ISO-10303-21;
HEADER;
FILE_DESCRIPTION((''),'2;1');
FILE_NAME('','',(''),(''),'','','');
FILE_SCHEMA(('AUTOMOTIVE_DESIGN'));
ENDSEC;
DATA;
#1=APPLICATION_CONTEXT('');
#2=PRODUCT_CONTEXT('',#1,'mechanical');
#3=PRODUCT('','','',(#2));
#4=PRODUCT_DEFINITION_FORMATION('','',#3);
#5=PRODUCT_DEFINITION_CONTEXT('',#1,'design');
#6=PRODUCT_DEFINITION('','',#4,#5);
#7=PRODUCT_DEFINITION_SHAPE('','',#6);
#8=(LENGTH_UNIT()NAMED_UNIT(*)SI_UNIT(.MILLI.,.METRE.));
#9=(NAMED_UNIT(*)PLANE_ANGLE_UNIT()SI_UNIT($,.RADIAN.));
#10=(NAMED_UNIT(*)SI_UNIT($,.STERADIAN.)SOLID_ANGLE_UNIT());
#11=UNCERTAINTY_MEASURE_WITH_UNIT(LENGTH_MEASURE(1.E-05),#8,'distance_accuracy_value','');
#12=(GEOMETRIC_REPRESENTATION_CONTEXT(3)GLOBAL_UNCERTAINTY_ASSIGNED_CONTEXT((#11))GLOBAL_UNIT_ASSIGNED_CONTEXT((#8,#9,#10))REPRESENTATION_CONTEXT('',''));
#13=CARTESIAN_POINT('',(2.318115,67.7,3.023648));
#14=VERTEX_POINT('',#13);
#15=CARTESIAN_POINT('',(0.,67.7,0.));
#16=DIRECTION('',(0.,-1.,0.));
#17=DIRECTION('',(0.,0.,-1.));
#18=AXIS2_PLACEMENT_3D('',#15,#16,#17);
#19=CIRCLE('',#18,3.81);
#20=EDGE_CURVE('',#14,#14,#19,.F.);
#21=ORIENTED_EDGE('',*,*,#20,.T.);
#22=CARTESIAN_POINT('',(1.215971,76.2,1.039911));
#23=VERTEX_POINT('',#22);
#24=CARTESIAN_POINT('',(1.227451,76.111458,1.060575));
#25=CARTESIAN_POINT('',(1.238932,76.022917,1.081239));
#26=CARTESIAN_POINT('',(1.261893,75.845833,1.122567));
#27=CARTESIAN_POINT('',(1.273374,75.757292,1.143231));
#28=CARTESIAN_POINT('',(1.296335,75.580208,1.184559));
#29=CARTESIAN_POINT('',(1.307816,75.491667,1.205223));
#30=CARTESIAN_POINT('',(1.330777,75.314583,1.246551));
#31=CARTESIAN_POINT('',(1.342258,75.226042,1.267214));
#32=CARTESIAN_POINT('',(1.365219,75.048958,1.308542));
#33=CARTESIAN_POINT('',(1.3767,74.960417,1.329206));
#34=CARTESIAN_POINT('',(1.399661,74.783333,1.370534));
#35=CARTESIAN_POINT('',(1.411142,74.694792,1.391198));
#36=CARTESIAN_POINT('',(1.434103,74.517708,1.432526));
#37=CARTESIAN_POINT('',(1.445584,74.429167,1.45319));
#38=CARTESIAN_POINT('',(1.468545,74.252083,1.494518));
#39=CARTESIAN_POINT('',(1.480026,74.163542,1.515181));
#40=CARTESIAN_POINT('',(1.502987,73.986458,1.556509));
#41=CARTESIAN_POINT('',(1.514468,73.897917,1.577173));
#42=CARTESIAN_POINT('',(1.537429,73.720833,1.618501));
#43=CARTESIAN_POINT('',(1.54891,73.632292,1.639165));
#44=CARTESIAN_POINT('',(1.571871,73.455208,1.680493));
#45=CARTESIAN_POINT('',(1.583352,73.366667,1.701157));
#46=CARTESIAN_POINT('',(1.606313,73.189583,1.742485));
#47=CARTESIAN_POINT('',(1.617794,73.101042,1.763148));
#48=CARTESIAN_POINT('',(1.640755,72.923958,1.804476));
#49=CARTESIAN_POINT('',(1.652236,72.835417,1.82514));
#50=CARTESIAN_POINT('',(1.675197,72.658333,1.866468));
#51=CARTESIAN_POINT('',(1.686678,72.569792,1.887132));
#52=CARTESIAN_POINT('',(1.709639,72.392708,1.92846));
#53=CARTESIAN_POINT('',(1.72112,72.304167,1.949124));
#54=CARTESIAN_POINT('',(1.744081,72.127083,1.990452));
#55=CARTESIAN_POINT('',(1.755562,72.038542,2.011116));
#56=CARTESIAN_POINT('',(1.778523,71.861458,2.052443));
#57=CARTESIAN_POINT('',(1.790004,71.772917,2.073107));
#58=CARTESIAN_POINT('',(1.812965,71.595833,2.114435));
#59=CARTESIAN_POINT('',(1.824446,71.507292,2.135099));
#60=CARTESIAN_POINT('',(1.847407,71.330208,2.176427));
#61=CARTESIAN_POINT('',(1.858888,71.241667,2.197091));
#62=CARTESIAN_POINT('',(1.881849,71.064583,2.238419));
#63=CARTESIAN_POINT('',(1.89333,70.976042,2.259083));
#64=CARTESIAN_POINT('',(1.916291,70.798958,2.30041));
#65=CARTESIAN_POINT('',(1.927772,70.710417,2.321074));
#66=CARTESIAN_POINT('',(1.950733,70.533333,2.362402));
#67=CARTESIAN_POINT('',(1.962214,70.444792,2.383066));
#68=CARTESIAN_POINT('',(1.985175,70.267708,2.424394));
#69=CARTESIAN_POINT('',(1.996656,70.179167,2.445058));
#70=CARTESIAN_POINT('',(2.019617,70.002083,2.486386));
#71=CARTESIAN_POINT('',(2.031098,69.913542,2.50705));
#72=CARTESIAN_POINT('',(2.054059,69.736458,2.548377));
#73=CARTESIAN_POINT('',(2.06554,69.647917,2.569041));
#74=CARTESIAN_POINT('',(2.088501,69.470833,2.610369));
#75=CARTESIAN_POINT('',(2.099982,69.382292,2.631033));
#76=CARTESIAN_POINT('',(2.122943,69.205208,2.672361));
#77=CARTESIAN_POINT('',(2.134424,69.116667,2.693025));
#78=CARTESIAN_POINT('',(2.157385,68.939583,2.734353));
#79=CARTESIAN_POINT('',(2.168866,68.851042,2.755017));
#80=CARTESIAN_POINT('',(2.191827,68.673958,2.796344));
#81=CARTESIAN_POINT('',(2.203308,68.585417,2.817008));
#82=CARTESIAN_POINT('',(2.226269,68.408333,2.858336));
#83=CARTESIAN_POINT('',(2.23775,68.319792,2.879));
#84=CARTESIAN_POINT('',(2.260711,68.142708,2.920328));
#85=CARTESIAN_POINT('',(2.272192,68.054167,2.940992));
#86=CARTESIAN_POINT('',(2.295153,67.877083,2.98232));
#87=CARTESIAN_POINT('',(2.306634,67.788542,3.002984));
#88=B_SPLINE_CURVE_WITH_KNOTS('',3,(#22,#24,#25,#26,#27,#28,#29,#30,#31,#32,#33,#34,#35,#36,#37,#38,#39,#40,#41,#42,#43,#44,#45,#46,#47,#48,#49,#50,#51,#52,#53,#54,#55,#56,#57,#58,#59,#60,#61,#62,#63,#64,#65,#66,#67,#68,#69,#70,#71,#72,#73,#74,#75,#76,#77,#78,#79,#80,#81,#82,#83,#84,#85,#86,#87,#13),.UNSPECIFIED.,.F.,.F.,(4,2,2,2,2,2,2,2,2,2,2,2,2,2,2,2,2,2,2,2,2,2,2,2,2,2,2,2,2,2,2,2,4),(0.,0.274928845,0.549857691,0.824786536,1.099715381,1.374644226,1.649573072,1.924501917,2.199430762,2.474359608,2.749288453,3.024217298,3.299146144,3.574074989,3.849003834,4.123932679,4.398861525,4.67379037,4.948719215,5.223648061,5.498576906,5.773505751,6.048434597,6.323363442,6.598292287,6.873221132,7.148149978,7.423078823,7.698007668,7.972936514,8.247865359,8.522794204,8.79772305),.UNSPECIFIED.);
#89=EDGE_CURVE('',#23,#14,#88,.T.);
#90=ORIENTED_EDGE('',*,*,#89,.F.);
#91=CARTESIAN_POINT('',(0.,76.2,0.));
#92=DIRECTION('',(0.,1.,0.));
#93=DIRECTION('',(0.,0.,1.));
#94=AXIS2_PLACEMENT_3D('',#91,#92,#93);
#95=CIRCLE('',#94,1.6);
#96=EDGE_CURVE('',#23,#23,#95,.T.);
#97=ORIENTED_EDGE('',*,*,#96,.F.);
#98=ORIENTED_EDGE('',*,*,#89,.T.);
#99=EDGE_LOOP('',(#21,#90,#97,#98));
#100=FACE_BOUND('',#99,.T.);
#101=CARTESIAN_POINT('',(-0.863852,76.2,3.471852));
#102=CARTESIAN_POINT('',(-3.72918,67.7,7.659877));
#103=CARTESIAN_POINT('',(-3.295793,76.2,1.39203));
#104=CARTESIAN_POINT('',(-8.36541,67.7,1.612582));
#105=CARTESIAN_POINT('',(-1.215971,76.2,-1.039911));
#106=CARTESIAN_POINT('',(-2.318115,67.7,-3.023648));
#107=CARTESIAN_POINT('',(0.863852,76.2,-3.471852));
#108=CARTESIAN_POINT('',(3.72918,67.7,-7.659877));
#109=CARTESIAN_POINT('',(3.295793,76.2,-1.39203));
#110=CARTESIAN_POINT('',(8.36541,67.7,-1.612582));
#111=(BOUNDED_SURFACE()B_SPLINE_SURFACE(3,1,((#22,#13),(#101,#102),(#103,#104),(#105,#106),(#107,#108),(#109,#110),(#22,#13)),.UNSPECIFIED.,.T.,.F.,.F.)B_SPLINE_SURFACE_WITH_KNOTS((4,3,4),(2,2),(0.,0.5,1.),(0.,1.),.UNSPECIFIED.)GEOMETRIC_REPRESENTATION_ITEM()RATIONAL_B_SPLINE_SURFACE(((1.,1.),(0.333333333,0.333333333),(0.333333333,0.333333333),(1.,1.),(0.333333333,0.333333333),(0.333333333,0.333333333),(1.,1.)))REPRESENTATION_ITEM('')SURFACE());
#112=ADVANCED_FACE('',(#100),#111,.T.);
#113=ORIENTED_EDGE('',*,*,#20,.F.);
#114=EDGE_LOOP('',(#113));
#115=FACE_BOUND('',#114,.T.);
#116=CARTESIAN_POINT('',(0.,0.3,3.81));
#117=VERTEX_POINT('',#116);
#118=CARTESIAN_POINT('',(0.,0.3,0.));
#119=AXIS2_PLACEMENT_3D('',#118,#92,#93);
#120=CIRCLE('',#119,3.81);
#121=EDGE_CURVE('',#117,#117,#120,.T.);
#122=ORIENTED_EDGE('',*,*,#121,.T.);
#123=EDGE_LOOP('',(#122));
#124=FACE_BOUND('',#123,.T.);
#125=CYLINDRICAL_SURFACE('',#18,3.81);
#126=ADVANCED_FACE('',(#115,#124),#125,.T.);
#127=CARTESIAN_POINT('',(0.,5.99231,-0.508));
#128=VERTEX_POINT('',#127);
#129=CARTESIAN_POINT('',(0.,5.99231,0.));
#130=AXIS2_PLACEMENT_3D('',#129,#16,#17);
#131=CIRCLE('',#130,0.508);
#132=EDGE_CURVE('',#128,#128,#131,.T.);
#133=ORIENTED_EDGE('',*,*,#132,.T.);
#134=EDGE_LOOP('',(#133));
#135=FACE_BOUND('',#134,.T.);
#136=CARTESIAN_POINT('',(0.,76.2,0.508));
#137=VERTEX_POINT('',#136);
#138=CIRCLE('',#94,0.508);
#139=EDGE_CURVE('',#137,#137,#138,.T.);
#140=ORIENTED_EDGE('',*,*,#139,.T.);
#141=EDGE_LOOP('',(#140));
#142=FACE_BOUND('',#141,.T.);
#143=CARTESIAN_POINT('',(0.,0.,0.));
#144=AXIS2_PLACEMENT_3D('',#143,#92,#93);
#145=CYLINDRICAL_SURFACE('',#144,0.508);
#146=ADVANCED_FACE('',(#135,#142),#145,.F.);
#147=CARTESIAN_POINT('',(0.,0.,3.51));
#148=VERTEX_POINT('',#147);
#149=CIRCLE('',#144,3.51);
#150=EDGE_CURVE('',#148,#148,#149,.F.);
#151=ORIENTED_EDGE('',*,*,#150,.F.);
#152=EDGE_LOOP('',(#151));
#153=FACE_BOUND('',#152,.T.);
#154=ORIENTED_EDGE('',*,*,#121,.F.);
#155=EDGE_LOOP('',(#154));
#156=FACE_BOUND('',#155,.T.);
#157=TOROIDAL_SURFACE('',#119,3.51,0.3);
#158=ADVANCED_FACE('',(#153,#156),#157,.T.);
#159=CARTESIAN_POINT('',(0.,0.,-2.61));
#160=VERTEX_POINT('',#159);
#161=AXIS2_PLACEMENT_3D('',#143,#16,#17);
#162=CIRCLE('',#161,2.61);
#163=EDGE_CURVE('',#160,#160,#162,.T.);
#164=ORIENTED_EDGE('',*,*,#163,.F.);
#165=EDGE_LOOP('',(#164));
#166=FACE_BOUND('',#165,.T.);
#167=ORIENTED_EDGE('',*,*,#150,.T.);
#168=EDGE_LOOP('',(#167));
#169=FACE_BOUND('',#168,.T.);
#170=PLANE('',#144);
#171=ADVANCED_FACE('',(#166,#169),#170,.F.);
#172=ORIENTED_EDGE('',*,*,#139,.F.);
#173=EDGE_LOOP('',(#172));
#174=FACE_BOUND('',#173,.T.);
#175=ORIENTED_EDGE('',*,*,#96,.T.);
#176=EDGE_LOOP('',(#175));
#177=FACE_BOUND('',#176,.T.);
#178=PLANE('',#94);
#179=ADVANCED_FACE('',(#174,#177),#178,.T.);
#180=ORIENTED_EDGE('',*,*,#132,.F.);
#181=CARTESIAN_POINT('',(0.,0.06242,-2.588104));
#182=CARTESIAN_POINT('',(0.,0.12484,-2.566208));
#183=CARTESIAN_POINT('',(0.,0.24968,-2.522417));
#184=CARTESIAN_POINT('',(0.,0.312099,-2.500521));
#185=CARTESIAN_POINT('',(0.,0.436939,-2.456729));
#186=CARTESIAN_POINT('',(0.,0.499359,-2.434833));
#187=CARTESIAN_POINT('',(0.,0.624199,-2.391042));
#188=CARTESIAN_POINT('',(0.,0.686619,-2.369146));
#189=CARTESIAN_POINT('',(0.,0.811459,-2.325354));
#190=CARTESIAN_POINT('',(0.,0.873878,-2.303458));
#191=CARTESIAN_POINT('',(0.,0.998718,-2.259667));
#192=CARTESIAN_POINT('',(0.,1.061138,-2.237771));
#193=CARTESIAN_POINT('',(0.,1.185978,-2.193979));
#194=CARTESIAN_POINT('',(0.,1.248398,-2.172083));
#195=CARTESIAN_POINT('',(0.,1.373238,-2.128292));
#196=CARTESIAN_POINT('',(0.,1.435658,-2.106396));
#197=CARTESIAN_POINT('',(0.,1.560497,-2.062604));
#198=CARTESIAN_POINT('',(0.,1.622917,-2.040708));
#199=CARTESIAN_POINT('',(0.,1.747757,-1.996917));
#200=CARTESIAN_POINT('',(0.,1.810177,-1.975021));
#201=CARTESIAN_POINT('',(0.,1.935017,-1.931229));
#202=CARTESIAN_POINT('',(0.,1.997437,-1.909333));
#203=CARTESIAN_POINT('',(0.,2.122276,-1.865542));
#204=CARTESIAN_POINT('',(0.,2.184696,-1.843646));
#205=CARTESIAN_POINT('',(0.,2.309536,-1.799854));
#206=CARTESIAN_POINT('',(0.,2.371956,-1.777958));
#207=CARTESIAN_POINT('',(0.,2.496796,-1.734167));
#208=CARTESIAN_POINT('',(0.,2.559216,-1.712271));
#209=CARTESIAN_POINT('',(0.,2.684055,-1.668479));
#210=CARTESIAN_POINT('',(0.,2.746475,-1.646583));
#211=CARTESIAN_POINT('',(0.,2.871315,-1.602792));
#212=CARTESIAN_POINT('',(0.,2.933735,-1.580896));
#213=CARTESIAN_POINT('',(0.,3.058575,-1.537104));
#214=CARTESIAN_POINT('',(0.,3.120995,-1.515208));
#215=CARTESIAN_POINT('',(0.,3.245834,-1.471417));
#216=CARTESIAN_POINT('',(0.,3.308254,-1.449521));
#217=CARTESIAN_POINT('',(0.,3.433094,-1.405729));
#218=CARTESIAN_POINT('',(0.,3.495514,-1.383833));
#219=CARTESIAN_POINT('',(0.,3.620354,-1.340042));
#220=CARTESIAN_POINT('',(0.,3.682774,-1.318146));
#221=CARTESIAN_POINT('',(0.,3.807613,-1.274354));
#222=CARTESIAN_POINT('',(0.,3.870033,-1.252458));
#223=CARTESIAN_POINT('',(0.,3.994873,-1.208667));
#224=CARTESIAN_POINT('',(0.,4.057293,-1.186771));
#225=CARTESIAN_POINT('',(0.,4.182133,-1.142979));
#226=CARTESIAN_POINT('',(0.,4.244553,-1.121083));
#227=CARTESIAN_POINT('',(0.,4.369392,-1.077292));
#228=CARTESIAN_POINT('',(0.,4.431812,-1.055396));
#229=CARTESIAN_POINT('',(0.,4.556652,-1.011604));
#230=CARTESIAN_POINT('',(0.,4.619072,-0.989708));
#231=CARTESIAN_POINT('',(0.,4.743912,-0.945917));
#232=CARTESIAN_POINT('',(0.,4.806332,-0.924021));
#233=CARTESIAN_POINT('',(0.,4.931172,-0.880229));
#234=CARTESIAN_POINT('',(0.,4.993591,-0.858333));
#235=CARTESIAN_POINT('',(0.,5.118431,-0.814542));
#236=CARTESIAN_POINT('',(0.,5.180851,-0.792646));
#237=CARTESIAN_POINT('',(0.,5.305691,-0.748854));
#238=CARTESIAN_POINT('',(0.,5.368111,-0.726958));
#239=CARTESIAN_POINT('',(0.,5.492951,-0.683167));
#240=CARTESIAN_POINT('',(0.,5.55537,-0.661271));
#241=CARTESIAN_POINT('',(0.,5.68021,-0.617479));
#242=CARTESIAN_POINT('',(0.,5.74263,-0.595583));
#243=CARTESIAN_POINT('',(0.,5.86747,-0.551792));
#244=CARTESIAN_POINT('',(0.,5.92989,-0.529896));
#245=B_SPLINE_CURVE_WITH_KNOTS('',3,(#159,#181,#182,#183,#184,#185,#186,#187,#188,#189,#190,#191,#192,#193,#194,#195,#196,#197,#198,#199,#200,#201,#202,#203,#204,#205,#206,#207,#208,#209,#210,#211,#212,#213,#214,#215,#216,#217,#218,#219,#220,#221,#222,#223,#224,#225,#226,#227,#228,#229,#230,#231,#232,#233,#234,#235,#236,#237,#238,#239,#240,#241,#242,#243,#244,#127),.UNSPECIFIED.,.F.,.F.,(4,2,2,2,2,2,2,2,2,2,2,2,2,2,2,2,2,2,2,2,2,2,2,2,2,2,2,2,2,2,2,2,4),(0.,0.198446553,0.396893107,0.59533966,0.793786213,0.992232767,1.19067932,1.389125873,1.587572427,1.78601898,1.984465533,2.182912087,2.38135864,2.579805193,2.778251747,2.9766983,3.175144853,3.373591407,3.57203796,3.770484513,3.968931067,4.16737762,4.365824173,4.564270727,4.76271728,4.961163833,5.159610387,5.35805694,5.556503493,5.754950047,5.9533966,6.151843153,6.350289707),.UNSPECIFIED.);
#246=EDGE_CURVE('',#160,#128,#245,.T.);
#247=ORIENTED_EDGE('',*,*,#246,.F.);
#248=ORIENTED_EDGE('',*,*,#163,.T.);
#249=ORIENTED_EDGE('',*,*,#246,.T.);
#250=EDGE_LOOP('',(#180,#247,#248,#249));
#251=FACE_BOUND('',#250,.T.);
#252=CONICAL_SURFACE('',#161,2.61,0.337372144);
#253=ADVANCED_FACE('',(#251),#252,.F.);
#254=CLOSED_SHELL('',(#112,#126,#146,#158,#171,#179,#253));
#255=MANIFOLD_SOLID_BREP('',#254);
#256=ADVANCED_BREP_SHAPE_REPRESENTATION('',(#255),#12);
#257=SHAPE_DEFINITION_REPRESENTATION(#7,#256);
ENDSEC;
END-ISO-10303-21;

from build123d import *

# Parameters (mm, degrees)
SKETCH1_R           = 3.81
BOSS_EXTRUDE1_DEPTH = 67.7
SKETCH5_R           = 0.508
CUT_EXTRUDE2_DEPTH  = 77.390262478
SKETCH7_R           = 2.61
CUT_EXTRUDE3_DEPTH  = 6
CUT_EXTRUDE3_DRAFT  = -19.33
FILLET3_R           = 0.3


with BuildPart() as part:
    # Sketch1 → Boss-Extrude1 (new body)
    with BuildSketch(Plane(origin=(0, 0, 0), x_dir=(1, 0, 0), z_dir=(0, 1, 0))):
        with Locations(Location((0, 0, 0), (0, 0, 270))):
            Circle(SKETCH1_R)
    extrude(amount=BOSS_EXTRUDE1_DEPTH)

    # Loft1: read off the stored shape, not the designer's step
    # Loft1: loft between two sections, ruled curve by curve
    loft1_from = [
        Edge.make_bspline([(1.215970554, 76.2, 1.039911348), (-0.863852142, 76.2, 3.471852456), (-3.29579325, 76.2, 1.39202976), (-1.215970554, 76.2, -1.039911348), (0.863852142, 76.2, -3.471852456), (3.29579325, 76.2, -1.39202976), (1.215970554, 76.2, 1.039911348)], [0, 0, 0, 0, 0.5, 0.5, 0.5, 1, 1, 1, 1], 3, [1, 0.333333333, 0.333333333, 1, 0.333333333, 0.333333333, 1]),
    ]
    loft1_to = [
        Edge.make_bspline([(2.318114705, 67.7, 3.023647501), (-3.729180297, 67.7, 7.659876912), (-8.365409708, 67.7, 1.612581909), (-2.318114705, 67.7, -3.023647501), (3.729180297, 67.7, -7.659876912), (8.365409708, 67.7, -1.612581909), (2.318114705, 67.7, 3.023647501)], [0, 0, 0, 0, 0.5, 0.5, 0.5, 1, 1, 1, 1], 3, [1, 0.333333333, 0.333333333, 1, 0.333333333, 0.333333333, 1]),
    ]
    loft1 = Solid(Shell([*[Face.make_surface_from_curves(loft1_from[k], loft1_to[k]) for k in range(1)], Face(Wire(loft1_from)), Face(Wire(loft1_to))]))
    add(loft1)

    # Sketch5 → Cut-Extrude2 (cut, through all)
    with BuildSketch(Plane(origin=(0, 76.2, 0), x_dir=(1, 0, 0), z_dir=(0, 1, 0))):
        with Locations(Location((0, 0, 0), (0, 0, 270))):
            Circle(SKETCH5_R)
    extrude(amount=-CUT_EXTRUDE2_DEPTH, mode=Mode.SUBTRACT)


with BuildPart() as cut_extrude3_tool:
    # Sketch7 → Cut-Extrude3 (with draft: the straight prism first)
    with BuildSketch(Plane.XZ):
        Circle(SKETCH7_R)
    extrude(amount=-CUT_EXTRUDE3_DEPTH)
    # Cut-Extrude3: the draft: its side faces are tilted about the plane it starts from
    cut_extrude3_sides = [cut_extrude3_tool.faces().sort_by_distance(p)[0] for p in [
        (-2.61, 3, 0),
    ]]
    draft(cut_extrude3_sides, Plane.XZ, CUT_EXTRUDE3_DRAFT)


with BuildPart() as part_1:
    add(part.part)

    # Cut-Extrude3: cut by cut_extrude3_tool
    add(cut_extrude3_tool.part, mode=Mode.SUBTRACT)

    # Fillet3
    fillet3_edges = [part_1.edges().sort_by_distance(p)[0] for p in [
        (0, 0, -3.81),
    ]]
    fillet(fillet3_edges, radius=FILLET3_R)


solid = part_1.part
